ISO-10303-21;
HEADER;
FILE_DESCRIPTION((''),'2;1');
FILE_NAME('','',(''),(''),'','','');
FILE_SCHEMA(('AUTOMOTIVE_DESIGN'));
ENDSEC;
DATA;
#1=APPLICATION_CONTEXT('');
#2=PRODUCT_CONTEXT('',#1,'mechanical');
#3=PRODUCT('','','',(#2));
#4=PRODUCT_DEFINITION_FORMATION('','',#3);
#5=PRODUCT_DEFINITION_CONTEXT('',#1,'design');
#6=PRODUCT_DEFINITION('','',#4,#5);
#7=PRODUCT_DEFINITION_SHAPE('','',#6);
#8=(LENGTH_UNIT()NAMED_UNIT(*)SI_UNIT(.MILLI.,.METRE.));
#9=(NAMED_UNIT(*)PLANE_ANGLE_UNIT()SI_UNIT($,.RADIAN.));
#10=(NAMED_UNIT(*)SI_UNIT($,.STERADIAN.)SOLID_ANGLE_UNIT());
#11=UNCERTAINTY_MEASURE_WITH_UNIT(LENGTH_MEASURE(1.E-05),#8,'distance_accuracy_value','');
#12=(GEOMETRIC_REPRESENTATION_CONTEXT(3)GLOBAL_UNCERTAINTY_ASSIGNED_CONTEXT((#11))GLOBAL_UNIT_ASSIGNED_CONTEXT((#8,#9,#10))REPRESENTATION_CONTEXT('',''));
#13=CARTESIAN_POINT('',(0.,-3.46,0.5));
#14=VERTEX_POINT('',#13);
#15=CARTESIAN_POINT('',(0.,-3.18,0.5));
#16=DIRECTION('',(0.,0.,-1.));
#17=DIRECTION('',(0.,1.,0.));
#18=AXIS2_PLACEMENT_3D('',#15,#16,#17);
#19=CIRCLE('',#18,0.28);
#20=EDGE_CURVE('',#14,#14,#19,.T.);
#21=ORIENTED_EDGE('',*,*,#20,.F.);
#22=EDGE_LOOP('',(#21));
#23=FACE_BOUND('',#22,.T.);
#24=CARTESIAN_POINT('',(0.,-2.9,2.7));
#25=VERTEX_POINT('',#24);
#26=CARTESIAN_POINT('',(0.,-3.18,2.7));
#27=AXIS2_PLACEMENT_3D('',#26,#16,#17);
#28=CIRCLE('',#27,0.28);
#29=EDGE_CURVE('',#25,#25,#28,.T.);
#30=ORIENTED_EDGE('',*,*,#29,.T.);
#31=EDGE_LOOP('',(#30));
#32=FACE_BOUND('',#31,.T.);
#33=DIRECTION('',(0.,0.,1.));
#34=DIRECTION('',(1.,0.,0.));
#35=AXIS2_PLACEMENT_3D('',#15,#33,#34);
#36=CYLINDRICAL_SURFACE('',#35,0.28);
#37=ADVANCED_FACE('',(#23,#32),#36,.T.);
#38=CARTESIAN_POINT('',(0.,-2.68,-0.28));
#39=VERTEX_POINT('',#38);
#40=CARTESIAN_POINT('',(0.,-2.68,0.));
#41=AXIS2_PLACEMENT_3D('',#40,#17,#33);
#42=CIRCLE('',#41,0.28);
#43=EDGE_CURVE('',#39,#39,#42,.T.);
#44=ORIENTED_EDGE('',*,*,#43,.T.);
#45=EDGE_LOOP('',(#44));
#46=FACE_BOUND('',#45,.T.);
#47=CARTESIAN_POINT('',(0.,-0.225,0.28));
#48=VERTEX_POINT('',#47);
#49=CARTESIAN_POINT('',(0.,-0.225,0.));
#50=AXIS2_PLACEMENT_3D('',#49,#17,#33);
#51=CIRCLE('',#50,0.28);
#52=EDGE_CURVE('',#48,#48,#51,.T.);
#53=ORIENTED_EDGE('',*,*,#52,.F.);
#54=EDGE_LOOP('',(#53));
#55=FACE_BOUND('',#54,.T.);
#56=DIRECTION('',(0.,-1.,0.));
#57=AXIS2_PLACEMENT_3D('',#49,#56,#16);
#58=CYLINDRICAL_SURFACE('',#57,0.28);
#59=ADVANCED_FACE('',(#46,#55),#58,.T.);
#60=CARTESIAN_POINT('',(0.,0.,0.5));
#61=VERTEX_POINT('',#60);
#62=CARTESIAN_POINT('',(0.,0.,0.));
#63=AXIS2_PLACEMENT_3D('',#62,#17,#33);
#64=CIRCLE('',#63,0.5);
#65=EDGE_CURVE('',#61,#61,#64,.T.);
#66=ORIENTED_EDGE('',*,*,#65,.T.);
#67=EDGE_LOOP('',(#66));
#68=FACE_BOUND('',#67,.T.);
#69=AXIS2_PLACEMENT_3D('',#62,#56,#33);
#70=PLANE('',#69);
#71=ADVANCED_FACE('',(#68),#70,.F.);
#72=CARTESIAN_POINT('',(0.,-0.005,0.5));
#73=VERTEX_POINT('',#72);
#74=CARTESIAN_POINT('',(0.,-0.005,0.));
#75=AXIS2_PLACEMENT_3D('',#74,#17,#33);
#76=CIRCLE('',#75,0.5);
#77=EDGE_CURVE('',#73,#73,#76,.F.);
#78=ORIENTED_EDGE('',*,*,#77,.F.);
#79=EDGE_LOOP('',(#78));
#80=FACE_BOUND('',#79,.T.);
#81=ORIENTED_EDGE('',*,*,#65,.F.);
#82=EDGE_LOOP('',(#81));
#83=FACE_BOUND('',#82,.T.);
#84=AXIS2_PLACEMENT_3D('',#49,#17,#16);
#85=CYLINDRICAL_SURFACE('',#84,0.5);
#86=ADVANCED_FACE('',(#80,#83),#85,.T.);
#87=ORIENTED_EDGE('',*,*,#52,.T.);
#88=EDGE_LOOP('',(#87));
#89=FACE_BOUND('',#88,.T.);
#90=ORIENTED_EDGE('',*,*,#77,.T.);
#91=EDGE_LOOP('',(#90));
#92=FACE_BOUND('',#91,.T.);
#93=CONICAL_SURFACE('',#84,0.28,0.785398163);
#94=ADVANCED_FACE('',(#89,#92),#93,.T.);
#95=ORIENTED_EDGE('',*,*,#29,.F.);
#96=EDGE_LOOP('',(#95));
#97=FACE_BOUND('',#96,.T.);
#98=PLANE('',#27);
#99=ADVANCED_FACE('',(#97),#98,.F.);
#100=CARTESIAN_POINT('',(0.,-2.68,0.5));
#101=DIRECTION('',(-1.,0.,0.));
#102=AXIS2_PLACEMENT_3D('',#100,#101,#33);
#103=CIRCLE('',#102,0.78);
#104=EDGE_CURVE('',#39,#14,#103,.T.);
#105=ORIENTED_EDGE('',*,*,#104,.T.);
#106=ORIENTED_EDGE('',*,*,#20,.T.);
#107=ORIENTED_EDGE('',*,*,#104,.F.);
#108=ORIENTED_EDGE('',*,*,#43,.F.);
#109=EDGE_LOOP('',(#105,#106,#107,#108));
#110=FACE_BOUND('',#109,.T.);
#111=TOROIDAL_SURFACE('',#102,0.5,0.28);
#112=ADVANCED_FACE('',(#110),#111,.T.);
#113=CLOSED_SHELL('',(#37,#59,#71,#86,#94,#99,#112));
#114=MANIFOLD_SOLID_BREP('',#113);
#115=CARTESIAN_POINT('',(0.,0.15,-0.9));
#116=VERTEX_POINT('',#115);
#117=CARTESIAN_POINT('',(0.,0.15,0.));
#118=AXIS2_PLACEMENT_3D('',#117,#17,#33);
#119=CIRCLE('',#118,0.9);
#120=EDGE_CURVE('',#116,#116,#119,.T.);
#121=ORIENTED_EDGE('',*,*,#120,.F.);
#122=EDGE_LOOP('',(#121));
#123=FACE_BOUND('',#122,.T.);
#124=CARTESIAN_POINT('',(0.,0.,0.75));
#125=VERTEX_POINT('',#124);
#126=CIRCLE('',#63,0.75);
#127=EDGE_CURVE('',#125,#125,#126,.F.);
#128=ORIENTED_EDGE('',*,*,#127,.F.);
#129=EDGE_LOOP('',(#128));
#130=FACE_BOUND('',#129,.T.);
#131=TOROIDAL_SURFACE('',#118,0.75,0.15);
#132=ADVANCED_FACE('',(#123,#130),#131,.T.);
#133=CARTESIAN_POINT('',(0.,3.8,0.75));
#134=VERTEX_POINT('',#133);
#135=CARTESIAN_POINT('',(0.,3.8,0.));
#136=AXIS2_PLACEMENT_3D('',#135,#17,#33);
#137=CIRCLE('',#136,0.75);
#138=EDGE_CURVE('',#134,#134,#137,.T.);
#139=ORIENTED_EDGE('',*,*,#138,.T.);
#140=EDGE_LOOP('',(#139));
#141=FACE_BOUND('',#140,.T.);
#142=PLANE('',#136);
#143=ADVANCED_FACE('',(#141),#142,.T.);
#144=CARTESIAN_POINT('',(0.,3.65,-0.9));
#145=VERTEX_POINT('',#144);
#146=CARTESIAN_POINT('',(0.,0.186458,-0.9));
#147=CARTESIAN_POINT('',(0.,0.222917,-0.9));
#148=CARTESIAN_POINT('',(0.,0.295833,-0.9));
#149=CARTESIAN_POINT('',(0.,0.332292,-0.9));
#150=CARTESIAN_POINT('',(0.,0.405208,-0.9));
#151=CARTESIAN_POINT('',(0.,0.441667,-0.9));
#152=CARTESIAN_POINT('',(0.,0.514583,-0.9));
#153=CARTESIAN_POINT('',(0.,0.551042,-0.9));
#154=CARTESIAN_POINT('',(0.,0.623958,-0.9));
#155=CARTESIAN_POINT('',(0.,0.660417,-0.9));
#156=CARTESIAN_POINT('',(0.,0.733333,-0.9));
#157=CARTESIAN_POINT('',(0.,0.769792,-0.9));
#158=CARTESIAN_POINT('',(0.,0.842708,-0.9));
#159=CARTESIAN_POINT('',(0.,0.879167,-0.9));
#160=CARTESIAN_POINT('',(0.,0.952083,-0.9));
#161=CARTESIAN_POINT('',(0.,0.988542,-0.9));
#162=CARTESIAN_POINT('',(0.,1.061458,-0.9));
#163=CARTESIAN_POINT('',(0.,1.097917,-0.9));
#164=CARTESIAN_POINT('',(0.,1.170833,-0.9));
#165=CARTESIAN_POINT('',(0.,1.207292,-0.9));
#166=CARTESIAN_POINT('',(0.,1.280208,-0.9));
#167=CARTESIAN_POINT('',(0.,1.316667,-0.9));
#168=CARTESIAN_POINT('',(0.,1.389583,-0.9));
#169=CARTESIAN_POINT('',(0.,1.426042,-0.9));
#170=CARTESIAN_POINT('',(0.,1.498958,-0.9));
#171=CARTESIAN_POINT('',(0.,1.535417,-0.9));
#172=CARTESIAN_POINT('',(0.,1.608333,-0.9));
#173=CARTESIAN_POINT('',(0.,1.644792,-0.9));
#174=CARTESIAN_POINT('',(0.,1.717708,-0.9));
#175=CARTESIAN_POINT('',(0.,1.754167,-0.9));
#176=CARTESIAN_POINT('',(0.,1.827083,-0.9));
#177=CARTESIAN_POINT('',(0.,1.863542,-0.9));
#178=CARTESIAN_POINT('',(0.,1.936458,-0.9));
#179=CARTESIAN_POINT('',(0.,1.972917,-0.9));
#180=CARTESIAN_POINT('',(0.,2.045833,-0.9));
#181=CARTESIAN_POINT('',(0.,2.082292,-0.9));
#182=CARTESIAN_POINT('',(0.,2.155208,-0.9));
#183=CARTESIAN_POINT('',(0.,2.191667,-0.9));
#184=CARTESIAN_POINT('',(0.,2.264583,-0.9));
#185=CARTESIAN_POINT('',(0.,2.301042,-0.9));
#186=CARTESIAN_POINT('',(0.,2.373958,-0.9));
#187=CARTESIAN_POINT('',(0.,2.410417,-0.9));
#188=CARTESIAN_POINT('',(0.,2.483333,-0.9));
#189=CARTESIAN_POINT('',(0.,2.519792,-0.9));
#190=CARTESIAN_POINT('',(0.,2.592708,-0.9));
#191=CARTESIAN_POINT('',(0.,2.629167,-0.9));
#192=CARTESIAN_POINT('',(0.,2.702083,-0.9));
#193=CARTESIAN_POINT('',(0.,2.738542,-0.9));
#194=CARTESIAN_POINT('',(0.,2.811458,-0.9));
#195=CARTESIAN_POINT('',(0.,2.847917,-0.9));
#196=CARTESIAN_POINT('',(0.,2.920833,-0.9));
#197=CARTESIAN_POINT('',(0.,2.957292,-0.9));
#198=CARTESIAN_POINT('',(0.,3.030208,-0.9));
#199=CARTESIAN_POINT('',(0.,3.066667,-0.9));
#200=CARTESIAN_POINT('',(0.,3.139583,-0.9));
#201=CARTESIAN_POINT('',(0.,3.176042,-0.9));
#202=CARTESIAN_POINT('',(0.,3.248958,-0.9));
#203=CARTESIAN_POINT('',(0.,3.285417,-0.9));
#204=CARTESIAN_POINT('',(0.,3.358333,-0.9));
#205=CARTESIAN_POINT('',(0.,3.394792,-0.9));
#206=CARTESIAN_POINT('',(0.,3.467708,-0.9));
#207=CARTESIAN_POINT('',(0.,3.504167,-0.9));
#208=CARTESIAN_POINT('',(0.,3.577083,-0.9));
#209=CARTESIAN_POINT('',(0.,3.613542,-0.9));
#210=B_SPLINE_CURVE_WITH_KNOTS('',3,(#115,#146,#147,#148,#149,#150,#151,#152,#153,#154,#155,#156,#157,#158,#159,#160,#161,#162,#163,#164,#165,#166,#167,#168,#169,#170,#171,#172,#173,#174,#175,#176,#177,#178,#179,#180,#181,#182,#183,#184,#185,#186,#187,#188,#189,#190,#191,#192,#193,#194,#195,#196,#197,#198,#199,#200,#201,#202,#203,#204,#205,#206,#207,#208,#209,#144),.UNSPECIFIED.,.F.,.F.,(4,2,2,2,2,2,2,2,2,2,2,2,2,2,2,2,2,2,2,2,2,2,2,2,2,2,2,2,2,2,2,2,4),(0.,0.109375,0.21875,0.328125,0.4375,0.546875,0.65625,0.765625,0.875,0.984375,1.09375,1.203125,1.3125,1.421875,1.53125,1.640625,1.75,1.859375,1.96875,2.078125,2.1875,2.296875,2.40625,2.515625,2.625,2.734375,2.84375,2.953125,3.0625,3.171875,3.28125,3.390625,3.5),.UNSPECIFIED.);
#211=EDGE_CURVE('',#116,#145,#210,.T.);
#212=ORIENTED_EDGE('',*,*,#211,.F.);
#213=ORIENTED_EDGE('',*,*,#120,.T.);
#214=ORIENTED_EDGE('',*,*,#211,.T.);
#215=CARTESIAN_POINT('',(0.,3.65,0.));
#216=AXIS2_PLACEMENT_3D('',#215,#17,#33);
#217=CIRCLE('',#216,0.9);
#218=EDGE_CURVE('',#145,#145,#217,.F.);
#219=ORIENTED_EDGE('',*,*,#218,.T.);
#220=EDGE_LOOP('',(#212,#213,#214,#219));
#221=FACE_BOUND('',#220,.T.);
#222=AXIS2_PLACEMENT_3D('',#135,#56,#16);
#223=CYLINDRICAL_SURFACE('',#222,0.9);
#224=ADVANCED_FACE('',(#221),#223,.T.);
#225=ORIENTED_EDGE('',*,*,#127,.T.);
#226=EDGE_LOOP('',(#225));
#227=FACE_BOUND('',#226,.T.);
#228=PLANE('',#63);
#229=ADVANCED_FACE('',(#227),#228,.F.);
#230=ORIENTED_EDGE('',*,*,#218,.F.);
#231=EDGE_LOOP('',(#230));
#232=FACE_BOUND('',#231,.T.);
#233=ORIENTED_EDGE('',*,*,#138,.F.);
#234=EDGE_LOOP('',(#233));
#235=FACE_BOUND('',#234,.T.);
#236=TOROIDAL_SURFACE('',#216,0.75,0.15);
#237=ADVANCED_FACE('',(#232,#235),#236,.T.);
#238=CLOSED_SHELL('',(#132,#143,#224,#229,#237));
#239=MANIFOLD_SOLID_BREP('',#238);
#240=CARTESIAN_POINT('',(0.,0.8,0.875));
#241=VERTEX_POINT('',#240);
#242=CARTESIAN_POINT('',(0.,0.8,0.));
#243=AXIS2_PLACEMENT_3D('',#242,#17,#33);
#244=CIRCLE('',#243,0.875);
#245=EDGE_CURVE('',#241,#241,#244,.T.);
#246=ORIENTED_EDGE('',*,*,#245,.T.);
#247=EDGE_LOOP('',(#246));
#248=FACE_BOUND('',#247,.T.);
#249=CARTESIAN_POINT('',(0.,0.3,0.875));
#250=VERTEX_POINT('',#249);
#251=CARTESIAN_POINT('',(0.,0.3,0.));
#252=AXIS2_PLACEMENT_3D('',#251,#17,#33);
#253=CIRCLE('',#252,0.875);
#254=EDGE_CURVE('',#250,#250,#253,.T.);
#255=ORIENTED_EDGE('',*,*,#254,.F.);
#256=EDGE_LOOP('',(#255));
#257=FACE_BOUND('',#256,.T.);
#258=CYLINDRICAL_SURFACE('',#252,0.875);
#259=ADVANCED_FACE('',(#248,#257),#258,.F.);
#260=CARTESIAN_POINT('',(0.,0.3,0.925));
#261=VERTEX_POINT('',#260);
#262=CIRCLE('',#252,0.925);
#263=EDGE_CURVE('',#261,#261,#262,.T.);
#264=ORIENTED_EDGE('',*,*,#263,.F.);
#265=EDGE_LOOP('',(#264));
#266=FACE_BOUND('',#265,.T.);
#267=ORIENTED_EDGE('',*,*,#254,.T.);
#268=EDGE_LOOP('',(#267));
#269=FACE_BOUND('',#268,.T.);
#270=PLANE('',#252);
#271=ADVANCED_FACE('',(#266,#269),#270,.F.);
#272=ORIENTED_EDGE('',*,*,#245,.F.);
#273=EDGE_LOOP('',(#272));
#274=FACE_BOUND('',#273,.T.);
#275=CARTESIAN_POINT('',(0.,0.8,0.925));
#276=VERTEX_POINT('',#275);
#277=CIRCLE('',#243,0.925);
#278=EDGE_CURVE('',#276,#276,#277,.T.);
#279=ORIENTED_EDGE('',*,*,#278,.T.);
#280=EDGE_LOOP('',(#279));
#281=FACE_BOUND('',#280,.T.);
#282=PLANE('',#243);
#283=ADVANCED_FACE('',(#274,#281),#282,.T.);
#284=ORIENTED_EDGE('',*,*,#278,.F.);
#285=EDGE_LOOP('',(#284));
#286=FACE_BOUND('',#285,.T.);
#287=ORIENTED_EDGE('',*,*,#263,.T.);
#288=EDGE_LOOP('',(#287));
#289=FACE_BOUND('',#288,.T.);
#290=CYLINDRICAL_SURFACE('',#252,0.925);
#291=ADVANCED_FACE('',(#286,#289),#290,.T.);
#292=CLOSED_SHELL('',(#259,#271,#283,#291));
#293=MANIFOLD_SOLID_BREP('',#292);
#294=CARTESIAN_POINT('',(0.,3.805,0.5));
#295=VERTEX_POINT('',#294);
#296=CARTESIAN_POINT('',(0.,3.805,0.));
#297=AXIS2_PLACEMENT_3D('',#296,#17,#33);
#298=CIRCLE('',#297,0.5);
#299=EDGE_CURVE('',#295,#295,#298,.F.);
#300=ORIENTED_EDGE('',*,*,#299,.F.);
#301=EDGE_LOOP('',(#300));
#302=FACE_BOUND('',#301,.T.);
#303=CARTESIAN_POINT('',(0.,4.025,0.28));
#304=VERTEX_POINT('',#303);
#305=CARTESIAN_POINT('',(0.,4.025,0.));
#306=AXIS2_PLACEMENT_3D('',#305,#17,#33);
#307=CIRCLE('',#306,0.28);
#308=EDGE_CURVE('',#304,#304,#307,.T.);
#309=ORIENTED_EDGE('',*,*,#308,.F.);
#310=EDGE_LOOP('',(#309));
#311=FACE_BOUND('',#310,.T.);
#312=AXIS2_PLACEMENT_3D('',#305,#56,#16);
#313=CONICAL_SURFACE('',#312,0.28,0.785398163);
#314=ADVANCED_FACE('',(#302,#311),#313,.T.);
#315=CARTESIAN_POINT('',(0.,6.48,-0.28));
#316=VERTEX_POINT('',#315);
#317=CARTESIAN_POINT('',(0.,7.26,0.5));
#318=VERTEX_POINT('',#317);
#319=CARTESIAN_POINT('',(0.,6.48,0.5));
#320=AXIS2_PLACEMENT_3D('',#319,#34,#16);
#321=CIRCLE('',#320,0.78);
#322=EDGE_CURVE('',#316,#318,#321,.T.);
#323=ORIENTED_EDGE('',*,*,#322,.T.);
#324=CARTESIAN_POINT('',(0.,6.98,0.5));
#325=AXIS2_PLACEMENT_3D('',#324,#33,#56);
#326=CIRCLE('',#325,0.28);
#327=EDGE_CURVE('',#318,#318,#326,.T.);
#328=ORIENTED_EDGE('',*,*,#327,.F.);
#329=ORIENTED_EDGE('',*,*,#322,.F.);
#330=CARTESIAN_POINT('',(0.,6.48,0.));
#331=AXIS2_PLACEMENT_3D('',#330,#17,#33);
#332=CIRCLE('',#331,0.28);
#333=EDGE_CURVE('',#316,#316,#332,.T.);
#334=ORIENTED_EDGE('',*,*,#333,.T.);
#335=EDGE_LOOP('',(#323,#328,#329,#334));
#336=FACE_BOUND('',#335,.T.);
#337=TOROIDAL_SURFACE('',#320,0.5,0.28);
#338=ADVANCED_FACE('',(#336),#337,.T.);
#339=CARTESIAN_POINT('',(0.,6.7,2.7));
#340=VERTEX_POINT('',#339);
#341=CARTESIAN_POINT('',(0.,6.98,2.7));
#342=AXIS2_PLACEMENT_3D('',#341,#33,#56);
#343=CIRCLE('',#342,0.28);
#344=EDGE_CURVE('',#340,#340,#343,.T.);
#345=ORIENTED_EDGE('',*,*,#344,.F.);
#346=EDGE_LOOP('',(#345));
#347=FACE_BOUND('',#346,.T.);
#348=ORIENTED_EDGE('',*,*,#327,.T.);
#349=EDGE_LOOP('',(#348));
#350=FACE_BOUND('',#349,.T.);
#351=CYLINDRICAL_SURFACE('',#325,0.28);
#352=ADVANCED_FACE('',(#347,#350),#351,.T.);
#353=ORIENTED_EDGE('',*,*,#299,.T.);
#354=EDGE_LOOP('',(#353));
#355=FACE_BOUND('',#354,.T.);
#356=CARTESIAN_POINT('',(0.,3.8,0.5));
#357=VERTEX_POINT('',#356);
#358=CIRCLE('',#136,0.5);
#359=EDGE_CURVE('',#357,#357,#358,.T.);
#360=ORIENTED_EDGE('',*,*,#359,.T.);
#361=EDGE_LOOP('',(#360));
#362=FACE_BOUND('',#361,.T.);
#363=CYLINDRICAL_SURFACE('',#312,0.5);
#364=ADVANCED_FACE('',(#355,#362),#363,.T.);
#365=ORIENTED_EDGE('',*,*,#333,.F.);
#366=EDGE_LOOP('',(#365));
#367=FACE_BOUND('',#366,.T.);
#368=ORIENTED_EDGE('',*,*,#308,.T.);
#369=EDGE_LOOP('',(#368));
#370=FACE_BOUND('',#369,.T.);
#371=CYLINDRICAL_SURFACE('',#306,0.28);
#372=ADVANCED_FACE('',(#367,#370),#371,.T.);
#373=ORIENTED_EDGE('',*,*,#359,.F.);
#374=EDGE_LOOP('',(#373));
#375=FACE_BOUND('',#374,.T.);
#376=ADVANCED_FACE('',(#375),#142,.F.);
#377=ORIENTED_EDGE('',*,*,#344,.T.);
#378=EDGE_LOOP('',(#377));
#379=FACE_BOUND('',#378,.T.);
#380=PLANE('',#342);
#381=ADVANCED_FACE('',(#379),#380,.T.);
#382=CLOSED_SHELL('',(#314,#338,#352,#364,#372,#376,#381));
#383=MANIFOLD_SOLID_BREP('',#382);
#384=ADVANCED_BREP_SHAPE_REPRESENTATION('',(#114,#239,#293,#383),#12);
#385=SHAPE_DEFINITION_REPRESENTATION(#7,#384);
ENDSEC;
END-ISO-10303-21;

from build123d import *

# Parameters (mm, degrees)
SKETCH1_R           = 0.9
BOSS_EXTRUDE1_DEPTH = 3.8
SKETCH2_R           = 0.5
BOSS_EXTRUDE2_DEPTH = 0.225
CHAMFER2_SIZE       = 0.22
FILLET1_R           = 0.15
FILLET2_R           = 0.15
SKETCH10_R          = 0.925
SKETCH10_R_2        = 0.875
BOSS_EXTRUDE9_DEPTH = 0.5
BARRER1_OUTLINE_R   = 0.28
BARRER1_ANGLE       = 90
BARRER1_START       = -2.6800001
BARRER1_2_OUTLINE_R = 0.28
BARRER1_2_DEPTH     = 2.4550001
BARRER1_START_2     = 0.4999999
BARRER1_3_OUTLINE_R = 0.28
BARRER1_3_DEPTH     = 2.2000001
BARRER2_OUTLINE_R   = 0.28
BARRER2_ANGLE       = 90
BARRER2_START       = 4.025
BARRER2_2_OUTLINE_R = 0.28
BARRER2_2_DEPTH     = 2.4550001
BARRER2_START_2     = 0.4999999
BARRER2_3_OUTLINE_R = 0.28
BARRER2_3_DEPTH     = 2.2000001


with BuildPart() as part:
    # Sketch1 → Boss-Extrude1 (new body)
    with BuildSketch(Plane(origin=(0, 0, 0), x_dir=(1, 0, 0), z_dir=(0, 1, 0))):
        with Locations(Location((0, 0, 0), (0, 0, 90))):
            Circle(SKETCH1_R)
    extrude(amount=BOSS_EXTRUDE1_DEPTH)

    # Fillet1
    fillet1_edges = [part.edges().sort_by_distance(p)[0] for p in [
        (0, 3.8, 0.9),
    ]]
    fillet(fillet1_edges, radius=FILLET1_R)

    # Fillet2
    fillet2_edges = [part.edges().sort_by_distance(p)[0] for p in [
        (0, 0, 0.9),
    ]]
    fillet(fillet2_edges, radius=FILLET2_R)


with BuildPart() as body_2:
    # Sketch2 → Boss-Extrude2 (new body)
    with BuildSketch(Plane(origin=(0, 3.8, 0), x_dir=(1, 0, 0), z_dir=(0, 1, 0))):
        with Locations(Location((0, 0, 0), (0, 0, 270))):
            Circle(SKETCH2_R)
    extrude(amount=BOSS_EXTRUDE2_DEPTH)

    # Chamfer2
    chamfer2_edges = [body_2.edges().sort_by_distance(p)[0] for p in [
        (0, 4.025, -0.5),
    ]]
    chamfer(chamfer2_edges, length=CHAMFER2_SIZE)


with BuildPart() as body_3:
    # Mirror1: mirrored copy
    add(body_2.part.mirror(Plane.ZX.offset(1.9)))

    # Barrer1: read off the stored shape, not the designer's step
    # Barrer1 outline → Barrer1 (revolve)
    with BuildSketch(Plane(origin=(0, -2.68, 0.5), x_dir=(0, -1, 0), z_dir=(0, 0, 1))):
        with Locations((0.5, 0)):
            Circle(BARRER1_OUTLINE_R)
    revolve(axis=Axis((0, -2.68, 0.5), (1, 0, 0)), revolution_arc=BARRER1_ANGLE)

    # Barrer1 2 outline → Barrer1 2 (add)
    with BuildSketch(Plane(origin=(0, 0, 0), x_dir=(1, 0, 0), z_dir=(0, 1, 0)).offset(BARRER1_START)):
        Circle(BARRER1_2_OUTLINE_R)
    extrude(amount=BARRER1_2_DEPTH)

    # Barrer1 3 outline → Barrer1 3 (add)
    with BuildSketch(Plane.XY.offset(BARRER1_START_2)):
        with Locations((0, -3.18)):
            Circle(BARRER1_3_OUTLINE_R)
    extrude(amount=BARRER1_3_DEPTH)


with BuildPart() as body_4:
    # Sketch10 → Boss-Extrude9 (new body)
    with BuildSketch(Plane(origin=(0, 0.8, 0), x_dir=(-1, 0, 0), z_dir=(0, 1, 0))):
        with Locations(Location((0, 0, 0), (0, 0, 90))):
            Circle(SKETCH10_R)
        with Locations(Location((0, 0, 0), (0, 0, 90))):
            Circle(SKETCH10_R_2, mode=Mode.SUBTRACT)
    extrude(amount=-BOSS_EXTRUDE9_DEPTH)


with BuildPart() as body_2_1:
    add(body_2.part)

    # Barrer2: read off the stored shape, not the designer's step
    # Barrer2 outline → Barrer2 (revolve)
    with BuildSketch(Plane(origin=(0, 6.48, 0.5), x_dir=(0, 0, -1), z_dir=(0, -1, 0))):
        with Locations((0.5, 0)):
            Circle(BARRER2_OUTLINE_R)
    revolve(axis=Axis((0, 6.48, 0.5), (1, 0, 0)), revolution_arc=BARRER2_ANGLE)

    # Barrer2 2 outline → Barrer2 2 (add)
    with BuildSketch(Plane(origin=(0, 0, 0), x_dir=(1, 0, 0), z_dir=(0, 1, 0)).offset(BARRER2_START)):
        Circle(BARRER2_2_OUTLINE_R)
    extrude(amount=BARRER2_2_DEPTH)

    # Barrer2 3 outline → Barrer2 3 (add)
    with BuildSketch(Plane.XY.offset(BARRER2_START_2)):
        with Locations((0, 6.98)):
            Circle(BARRER2_3_OUTLINE_R)
    extrude(amount=BARRER2_3_DEPTH)


solid = Compound([part.part, body_3.part, body_4.part, body_2_1.part])
